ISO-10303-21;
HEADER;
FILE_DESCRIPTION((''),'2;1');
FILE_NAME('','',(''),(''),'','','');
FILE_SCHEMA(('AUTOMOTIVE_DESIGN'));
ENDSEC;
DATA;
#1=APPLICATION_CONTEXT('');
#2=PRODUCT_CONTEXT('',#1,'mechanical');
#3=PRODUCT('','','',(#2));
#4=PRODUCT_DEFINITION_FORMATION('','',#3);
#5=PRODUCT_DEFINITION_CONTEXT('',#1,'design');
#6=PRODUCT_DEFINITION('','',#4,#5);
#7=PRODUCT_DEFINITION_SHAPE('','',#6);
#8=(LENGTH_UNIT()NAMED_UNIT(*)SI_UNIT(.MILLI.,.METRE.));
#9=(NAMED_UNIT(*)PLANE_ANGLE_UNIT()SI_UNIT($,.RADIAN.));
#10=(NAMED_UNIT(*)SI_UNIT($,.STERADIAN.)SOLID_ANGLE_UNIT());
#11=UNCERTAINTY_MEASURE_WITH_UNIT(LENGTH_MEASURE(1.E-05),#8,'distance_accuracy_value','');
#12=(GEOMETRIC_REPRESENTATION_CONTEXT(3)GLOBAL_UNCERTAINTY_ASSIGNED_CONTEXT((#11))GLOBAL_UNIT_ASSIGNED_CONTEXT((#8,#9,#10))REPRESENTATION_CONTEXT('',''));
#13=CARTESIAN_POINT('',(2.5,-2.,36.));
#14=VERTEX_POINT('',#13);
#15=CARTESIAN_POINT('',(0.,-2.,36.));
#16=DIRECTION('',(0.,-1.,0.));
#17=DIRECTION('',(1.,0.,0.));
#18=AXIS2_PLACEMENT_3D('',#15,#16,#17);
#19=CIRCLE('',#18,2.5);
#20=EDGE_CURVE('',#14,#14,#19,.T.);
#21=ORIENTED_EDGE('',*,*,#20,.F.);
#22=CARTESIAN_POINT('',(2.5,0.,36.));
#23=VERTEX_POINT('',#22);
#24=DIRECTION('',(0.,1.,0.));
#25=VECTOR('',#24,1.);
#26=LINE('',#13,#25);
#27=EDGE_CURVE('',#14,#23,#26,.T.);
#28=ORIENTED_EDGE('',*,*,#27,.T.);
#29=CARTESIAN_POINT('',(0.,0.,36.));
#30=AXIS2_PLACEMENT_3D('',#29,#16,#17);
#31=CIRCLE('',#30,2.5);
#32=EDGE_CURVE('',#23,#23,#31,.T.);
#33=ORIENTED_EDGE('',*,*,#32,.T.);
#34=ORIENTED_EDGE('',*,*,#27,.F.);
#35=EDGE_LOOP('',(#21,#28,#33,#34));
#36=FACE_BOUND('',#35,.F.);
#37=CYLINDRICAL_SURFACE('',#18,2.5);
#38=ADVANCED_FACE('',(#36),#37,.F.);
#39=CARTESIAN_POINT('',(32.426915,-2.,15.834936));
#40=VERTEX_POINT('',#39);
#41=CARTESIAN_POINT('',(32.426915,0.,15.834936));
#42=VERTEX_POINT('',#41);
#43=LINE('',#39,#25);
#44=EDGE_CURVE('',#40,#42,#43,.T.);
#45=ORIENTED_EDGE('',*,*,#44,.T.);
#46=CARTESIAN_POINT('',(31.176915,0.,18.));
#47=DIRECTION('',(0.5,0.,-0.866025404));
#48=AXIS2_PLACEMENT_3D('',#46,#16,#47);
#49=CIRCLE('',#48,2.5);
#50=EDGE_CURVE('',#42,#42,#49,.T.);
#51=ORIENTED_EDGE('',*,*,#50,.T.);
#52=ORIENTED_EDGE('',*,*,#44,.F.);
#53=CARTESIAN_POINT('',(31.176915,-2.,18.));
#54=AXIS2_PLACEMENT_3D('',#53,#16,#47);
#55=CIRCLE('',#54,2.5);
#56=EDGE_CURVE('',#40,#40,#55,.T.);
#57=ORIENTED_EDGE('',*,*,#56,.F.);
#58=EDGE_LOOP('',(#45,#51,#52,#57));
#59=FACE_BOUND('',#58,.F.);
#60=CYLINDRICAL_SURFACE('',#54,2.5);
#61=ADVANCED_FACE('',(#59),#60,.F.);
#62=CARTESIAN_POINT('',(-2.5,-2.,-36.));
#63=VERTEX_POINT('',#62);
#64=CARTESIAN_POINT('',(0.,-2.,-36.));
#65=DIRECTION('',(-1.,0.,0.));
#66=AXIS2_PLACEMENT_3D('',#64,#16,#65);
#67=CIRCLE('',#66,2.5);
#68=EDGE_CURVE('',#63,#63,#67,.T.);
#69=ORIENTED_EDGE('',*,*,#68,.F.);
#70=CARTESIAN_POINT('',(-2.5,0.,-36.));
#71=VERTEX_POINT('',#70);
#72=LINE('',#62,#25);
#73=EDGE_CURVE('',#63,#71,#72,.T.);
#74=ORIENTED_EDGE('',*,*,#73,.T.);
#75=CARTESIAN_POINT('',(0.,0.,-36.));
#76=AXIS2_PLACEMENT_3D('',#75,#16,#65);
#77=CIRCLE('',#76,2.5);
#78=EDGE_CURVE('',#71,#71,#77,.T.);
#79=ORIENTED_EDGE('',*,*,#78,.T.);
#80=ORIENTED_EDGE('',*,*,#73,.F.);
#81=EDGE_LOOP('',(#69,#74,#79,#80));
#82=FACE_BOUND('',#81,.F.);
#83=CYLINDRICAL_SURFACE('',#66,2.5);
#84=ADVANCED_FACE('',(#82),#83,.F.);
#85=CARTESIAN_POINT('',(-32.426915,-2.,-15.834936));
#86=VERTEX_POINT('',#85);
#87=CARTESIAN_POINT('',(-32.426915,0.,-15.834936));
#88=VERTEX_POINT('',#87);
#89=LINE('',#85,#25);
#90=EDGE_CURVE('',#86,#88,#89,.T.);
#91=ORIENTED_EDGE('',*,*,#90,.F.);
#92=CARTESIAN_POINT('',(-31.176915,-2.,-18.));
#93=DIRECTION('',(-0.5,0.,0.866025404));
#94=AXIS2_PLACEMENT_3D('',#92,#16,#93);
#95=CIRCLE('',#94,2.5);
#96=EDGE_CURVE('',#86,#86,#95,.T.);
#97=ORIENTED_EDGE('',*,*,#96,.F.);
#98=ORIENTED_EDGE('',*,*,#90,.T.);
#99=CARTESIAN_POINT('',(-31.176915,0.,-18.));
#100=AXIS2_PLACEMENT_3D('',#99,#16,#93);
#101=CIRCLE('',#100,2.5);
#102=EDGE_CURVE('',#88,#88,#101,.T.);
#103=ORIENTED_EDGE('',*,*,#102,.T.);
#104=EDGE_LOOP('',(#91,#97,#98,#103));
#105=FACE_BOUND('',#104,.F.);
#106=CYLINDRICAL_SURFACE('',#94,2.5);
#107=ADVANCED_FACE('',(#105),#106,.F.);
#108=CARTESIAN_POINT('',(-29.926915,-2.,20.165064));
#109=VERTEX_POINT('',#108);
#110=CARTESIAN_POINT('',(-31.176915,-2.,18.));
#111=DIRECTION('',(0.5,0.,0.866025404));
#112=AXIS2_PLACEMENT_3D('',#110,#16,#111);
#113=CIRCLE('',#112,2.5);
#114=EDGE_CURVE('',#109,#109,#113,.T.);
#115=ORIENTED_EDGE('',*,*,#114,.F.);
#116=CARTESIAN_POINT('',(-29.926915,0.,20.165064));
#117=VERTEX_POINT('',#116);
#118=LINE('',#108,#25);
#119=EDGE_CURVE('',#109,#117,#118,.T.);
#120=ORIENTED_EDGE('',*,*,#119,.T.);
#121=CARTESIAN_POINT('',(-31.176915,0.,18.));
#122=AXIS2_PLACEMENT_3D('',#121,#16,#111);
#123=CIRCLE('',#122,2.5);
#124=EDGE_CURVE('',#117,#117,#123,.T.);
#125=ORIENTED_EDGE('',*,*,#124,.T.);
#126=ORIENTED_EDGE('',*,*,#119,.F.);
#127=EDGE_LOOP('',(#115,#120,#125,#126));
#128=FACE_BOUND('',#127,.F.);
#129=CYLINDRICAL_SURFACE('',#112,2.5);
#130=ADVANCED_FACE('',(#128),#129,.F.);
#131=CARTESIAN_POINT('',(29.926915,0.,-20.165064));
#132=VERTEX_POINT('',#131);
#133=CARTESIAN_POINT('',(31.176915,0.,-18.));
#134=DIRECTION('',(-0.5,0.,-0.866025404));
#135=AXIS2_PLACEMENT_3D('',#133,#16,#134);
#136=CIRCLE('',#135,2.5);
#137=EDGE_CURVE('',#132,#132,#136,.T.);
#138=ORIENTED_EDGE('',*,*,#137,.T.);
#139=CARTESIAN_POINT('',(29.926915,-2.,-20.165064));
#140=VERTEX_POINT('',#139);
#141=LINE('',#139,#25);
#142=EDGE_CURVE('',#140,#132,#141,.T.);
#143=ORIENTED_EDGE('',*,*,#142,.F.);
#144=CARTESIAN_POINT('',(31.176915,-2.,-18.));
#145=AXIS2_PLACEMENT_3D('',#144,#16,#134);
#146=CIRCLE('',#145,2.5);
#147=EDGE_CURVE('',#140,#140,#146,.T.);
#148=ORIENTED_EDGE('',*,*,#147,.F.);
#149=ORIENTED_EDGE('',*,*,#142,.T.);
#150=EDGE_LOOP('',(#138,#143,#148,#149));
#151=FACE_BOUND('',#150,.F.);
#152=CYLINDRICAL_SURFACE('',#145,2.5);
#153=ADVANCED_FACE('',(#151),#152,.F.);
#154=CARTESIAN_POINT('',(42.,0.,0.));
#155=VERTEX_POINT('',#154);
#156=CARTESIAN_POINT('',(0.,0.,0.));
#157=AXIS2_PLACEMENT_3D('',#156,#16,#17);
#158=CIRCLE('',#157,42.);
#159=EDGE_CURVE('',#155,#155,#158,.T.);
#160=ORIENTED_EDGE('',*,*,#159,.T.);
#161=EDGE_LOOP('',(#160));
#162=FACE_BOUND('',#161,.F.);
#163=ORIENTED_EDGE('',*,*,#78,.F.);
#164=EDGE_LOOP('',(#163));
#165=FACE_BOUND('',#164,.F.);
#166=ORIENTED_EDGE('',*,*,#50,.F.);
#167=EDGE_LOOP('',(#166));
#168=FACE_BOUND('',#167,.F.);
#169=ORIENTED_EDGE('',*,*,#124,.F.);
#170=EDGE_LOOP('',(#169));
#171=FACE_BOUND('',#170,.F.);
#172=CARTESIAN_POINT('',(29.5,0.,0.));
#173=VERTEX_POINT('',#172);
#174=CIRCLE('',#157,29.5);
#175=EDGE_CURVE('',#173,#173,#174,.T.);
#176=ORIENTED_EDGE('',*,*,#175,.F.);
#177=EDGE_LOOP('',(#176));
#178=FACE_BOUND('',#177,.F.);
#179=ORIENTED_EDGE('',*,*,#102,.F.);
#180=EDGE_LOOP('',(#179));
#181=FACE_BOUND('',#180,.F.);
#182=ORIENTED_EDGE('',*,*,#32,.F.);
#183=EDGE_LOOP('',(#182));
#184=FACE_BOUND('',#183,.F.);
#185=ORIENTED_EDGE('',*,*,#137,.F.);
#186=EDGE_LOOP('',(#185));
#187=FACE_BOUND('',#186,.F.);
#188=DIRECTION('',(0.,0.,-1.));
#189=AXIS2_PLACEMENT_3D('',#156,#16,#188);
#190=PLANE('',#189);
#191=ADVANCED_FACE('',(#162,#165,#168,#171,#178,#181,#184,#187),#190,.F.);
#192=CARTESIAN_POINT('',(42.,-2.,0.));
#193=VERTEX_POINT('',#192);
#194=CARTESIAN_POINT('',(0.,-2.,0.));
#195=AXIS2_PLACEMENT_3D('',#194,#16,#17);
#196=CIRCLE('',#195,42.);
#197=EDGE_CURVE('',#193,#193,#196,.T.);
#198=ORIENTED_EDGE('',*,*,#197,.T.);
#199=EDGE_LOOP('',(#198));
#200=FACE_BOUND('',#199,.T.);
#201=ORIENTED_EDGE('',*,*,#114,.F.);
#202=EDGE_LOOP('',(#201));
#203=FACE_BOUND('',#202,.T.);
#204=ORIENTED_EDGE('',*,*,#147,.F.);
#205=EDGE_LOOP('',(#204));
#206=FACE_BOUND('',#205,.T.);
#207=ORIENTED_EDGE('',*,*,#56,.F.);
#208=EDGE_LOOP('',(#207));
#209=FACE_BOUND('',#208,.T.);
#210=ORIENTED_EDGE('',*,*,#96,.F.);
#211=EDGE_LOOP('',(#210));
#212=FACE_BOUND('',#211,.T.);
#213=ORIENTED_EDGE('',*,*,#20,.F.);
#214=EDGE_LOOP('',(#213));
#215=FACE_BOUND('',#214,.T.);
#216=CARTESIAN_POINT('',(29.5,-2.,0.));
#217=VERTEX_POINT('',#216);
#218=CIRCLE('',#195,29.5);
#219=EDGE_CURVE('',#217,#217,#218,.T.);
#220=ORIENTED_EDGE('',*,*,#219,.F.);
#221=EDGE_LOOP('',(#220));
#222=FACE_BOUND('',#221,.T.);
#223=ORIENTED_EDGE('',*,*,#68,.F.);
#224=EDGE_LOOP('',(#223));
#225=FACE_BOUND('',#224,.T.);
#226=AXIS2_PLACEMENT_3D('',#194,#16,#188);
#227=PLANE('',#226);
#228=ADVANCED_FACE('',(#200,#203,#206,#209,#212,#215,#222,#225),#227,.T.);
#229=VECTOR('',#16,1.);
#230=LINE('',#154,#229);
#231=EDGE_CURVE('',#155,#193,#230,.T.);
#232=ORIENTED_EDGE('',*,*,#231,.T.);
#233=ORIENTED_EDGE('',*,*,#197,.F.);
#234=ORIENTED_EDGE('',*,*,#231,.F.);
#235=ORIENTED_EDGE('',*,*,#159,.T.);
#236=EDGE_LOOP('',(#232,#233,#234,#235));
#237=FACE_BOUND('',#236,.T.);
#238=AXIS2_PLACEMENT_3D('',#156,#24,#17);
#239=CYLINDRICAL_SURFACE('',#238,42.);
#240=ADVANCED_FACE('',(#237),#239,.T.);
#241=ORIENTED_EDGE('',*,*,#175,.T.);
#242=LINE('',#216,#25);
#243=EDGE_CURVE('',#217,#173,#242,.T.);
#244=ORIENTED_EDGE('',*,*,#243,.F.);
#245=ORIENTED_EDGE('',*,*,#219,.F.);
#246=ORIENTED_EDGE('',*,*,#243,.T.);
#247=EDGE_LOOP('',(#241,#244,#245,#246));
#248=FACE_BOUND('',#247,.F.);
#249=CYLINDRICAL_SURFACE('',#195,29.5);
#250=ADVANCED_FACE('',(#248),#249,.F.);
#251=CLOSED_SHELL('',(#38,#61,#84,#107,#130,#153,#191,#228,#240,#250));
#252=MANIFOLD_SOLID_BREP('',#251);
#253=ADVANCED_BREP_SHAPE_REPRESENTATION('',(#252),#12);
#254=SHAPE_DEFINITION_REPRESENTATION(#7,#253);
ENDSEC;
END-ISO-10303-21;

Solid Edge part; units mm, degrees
sketch "Sketch1" plane through (0, 0, 0) normal (0, -1, 0) x (1, 0, 0)
  circle A0 centre (0, 0) radius 42
  dimension "D1" = 84
extrude "Protrusion1" add sketch "Sketch1" along normal blind 2
sketch "Sketch2" plane through (0, -2, 0) normal (0, -1, 0) x (1, 0, 0)
  circle A0 centre (0, 0) radius 29.5
  dimension "D1" = 59
extrude "Cutout1" cut sketch "Sketch2" against normal through all
sketch "Sketch3" plane through (0, -2, 0) normal (0, -1, 0) x (1, 0, 0)
  circle A0 centre (0, 36) radius 2.5
  dimension "D1" = 5
  dimension "D2" = 36
extrude "Cutout2" cut sketch "Sketch3" against normal through all
pattern_circular "Pattern1" count 6 over 360 about axis through (0, -2, 0) along (0, 1, 0) of "Cutout2"
properties material "Aluminum, 1060"
